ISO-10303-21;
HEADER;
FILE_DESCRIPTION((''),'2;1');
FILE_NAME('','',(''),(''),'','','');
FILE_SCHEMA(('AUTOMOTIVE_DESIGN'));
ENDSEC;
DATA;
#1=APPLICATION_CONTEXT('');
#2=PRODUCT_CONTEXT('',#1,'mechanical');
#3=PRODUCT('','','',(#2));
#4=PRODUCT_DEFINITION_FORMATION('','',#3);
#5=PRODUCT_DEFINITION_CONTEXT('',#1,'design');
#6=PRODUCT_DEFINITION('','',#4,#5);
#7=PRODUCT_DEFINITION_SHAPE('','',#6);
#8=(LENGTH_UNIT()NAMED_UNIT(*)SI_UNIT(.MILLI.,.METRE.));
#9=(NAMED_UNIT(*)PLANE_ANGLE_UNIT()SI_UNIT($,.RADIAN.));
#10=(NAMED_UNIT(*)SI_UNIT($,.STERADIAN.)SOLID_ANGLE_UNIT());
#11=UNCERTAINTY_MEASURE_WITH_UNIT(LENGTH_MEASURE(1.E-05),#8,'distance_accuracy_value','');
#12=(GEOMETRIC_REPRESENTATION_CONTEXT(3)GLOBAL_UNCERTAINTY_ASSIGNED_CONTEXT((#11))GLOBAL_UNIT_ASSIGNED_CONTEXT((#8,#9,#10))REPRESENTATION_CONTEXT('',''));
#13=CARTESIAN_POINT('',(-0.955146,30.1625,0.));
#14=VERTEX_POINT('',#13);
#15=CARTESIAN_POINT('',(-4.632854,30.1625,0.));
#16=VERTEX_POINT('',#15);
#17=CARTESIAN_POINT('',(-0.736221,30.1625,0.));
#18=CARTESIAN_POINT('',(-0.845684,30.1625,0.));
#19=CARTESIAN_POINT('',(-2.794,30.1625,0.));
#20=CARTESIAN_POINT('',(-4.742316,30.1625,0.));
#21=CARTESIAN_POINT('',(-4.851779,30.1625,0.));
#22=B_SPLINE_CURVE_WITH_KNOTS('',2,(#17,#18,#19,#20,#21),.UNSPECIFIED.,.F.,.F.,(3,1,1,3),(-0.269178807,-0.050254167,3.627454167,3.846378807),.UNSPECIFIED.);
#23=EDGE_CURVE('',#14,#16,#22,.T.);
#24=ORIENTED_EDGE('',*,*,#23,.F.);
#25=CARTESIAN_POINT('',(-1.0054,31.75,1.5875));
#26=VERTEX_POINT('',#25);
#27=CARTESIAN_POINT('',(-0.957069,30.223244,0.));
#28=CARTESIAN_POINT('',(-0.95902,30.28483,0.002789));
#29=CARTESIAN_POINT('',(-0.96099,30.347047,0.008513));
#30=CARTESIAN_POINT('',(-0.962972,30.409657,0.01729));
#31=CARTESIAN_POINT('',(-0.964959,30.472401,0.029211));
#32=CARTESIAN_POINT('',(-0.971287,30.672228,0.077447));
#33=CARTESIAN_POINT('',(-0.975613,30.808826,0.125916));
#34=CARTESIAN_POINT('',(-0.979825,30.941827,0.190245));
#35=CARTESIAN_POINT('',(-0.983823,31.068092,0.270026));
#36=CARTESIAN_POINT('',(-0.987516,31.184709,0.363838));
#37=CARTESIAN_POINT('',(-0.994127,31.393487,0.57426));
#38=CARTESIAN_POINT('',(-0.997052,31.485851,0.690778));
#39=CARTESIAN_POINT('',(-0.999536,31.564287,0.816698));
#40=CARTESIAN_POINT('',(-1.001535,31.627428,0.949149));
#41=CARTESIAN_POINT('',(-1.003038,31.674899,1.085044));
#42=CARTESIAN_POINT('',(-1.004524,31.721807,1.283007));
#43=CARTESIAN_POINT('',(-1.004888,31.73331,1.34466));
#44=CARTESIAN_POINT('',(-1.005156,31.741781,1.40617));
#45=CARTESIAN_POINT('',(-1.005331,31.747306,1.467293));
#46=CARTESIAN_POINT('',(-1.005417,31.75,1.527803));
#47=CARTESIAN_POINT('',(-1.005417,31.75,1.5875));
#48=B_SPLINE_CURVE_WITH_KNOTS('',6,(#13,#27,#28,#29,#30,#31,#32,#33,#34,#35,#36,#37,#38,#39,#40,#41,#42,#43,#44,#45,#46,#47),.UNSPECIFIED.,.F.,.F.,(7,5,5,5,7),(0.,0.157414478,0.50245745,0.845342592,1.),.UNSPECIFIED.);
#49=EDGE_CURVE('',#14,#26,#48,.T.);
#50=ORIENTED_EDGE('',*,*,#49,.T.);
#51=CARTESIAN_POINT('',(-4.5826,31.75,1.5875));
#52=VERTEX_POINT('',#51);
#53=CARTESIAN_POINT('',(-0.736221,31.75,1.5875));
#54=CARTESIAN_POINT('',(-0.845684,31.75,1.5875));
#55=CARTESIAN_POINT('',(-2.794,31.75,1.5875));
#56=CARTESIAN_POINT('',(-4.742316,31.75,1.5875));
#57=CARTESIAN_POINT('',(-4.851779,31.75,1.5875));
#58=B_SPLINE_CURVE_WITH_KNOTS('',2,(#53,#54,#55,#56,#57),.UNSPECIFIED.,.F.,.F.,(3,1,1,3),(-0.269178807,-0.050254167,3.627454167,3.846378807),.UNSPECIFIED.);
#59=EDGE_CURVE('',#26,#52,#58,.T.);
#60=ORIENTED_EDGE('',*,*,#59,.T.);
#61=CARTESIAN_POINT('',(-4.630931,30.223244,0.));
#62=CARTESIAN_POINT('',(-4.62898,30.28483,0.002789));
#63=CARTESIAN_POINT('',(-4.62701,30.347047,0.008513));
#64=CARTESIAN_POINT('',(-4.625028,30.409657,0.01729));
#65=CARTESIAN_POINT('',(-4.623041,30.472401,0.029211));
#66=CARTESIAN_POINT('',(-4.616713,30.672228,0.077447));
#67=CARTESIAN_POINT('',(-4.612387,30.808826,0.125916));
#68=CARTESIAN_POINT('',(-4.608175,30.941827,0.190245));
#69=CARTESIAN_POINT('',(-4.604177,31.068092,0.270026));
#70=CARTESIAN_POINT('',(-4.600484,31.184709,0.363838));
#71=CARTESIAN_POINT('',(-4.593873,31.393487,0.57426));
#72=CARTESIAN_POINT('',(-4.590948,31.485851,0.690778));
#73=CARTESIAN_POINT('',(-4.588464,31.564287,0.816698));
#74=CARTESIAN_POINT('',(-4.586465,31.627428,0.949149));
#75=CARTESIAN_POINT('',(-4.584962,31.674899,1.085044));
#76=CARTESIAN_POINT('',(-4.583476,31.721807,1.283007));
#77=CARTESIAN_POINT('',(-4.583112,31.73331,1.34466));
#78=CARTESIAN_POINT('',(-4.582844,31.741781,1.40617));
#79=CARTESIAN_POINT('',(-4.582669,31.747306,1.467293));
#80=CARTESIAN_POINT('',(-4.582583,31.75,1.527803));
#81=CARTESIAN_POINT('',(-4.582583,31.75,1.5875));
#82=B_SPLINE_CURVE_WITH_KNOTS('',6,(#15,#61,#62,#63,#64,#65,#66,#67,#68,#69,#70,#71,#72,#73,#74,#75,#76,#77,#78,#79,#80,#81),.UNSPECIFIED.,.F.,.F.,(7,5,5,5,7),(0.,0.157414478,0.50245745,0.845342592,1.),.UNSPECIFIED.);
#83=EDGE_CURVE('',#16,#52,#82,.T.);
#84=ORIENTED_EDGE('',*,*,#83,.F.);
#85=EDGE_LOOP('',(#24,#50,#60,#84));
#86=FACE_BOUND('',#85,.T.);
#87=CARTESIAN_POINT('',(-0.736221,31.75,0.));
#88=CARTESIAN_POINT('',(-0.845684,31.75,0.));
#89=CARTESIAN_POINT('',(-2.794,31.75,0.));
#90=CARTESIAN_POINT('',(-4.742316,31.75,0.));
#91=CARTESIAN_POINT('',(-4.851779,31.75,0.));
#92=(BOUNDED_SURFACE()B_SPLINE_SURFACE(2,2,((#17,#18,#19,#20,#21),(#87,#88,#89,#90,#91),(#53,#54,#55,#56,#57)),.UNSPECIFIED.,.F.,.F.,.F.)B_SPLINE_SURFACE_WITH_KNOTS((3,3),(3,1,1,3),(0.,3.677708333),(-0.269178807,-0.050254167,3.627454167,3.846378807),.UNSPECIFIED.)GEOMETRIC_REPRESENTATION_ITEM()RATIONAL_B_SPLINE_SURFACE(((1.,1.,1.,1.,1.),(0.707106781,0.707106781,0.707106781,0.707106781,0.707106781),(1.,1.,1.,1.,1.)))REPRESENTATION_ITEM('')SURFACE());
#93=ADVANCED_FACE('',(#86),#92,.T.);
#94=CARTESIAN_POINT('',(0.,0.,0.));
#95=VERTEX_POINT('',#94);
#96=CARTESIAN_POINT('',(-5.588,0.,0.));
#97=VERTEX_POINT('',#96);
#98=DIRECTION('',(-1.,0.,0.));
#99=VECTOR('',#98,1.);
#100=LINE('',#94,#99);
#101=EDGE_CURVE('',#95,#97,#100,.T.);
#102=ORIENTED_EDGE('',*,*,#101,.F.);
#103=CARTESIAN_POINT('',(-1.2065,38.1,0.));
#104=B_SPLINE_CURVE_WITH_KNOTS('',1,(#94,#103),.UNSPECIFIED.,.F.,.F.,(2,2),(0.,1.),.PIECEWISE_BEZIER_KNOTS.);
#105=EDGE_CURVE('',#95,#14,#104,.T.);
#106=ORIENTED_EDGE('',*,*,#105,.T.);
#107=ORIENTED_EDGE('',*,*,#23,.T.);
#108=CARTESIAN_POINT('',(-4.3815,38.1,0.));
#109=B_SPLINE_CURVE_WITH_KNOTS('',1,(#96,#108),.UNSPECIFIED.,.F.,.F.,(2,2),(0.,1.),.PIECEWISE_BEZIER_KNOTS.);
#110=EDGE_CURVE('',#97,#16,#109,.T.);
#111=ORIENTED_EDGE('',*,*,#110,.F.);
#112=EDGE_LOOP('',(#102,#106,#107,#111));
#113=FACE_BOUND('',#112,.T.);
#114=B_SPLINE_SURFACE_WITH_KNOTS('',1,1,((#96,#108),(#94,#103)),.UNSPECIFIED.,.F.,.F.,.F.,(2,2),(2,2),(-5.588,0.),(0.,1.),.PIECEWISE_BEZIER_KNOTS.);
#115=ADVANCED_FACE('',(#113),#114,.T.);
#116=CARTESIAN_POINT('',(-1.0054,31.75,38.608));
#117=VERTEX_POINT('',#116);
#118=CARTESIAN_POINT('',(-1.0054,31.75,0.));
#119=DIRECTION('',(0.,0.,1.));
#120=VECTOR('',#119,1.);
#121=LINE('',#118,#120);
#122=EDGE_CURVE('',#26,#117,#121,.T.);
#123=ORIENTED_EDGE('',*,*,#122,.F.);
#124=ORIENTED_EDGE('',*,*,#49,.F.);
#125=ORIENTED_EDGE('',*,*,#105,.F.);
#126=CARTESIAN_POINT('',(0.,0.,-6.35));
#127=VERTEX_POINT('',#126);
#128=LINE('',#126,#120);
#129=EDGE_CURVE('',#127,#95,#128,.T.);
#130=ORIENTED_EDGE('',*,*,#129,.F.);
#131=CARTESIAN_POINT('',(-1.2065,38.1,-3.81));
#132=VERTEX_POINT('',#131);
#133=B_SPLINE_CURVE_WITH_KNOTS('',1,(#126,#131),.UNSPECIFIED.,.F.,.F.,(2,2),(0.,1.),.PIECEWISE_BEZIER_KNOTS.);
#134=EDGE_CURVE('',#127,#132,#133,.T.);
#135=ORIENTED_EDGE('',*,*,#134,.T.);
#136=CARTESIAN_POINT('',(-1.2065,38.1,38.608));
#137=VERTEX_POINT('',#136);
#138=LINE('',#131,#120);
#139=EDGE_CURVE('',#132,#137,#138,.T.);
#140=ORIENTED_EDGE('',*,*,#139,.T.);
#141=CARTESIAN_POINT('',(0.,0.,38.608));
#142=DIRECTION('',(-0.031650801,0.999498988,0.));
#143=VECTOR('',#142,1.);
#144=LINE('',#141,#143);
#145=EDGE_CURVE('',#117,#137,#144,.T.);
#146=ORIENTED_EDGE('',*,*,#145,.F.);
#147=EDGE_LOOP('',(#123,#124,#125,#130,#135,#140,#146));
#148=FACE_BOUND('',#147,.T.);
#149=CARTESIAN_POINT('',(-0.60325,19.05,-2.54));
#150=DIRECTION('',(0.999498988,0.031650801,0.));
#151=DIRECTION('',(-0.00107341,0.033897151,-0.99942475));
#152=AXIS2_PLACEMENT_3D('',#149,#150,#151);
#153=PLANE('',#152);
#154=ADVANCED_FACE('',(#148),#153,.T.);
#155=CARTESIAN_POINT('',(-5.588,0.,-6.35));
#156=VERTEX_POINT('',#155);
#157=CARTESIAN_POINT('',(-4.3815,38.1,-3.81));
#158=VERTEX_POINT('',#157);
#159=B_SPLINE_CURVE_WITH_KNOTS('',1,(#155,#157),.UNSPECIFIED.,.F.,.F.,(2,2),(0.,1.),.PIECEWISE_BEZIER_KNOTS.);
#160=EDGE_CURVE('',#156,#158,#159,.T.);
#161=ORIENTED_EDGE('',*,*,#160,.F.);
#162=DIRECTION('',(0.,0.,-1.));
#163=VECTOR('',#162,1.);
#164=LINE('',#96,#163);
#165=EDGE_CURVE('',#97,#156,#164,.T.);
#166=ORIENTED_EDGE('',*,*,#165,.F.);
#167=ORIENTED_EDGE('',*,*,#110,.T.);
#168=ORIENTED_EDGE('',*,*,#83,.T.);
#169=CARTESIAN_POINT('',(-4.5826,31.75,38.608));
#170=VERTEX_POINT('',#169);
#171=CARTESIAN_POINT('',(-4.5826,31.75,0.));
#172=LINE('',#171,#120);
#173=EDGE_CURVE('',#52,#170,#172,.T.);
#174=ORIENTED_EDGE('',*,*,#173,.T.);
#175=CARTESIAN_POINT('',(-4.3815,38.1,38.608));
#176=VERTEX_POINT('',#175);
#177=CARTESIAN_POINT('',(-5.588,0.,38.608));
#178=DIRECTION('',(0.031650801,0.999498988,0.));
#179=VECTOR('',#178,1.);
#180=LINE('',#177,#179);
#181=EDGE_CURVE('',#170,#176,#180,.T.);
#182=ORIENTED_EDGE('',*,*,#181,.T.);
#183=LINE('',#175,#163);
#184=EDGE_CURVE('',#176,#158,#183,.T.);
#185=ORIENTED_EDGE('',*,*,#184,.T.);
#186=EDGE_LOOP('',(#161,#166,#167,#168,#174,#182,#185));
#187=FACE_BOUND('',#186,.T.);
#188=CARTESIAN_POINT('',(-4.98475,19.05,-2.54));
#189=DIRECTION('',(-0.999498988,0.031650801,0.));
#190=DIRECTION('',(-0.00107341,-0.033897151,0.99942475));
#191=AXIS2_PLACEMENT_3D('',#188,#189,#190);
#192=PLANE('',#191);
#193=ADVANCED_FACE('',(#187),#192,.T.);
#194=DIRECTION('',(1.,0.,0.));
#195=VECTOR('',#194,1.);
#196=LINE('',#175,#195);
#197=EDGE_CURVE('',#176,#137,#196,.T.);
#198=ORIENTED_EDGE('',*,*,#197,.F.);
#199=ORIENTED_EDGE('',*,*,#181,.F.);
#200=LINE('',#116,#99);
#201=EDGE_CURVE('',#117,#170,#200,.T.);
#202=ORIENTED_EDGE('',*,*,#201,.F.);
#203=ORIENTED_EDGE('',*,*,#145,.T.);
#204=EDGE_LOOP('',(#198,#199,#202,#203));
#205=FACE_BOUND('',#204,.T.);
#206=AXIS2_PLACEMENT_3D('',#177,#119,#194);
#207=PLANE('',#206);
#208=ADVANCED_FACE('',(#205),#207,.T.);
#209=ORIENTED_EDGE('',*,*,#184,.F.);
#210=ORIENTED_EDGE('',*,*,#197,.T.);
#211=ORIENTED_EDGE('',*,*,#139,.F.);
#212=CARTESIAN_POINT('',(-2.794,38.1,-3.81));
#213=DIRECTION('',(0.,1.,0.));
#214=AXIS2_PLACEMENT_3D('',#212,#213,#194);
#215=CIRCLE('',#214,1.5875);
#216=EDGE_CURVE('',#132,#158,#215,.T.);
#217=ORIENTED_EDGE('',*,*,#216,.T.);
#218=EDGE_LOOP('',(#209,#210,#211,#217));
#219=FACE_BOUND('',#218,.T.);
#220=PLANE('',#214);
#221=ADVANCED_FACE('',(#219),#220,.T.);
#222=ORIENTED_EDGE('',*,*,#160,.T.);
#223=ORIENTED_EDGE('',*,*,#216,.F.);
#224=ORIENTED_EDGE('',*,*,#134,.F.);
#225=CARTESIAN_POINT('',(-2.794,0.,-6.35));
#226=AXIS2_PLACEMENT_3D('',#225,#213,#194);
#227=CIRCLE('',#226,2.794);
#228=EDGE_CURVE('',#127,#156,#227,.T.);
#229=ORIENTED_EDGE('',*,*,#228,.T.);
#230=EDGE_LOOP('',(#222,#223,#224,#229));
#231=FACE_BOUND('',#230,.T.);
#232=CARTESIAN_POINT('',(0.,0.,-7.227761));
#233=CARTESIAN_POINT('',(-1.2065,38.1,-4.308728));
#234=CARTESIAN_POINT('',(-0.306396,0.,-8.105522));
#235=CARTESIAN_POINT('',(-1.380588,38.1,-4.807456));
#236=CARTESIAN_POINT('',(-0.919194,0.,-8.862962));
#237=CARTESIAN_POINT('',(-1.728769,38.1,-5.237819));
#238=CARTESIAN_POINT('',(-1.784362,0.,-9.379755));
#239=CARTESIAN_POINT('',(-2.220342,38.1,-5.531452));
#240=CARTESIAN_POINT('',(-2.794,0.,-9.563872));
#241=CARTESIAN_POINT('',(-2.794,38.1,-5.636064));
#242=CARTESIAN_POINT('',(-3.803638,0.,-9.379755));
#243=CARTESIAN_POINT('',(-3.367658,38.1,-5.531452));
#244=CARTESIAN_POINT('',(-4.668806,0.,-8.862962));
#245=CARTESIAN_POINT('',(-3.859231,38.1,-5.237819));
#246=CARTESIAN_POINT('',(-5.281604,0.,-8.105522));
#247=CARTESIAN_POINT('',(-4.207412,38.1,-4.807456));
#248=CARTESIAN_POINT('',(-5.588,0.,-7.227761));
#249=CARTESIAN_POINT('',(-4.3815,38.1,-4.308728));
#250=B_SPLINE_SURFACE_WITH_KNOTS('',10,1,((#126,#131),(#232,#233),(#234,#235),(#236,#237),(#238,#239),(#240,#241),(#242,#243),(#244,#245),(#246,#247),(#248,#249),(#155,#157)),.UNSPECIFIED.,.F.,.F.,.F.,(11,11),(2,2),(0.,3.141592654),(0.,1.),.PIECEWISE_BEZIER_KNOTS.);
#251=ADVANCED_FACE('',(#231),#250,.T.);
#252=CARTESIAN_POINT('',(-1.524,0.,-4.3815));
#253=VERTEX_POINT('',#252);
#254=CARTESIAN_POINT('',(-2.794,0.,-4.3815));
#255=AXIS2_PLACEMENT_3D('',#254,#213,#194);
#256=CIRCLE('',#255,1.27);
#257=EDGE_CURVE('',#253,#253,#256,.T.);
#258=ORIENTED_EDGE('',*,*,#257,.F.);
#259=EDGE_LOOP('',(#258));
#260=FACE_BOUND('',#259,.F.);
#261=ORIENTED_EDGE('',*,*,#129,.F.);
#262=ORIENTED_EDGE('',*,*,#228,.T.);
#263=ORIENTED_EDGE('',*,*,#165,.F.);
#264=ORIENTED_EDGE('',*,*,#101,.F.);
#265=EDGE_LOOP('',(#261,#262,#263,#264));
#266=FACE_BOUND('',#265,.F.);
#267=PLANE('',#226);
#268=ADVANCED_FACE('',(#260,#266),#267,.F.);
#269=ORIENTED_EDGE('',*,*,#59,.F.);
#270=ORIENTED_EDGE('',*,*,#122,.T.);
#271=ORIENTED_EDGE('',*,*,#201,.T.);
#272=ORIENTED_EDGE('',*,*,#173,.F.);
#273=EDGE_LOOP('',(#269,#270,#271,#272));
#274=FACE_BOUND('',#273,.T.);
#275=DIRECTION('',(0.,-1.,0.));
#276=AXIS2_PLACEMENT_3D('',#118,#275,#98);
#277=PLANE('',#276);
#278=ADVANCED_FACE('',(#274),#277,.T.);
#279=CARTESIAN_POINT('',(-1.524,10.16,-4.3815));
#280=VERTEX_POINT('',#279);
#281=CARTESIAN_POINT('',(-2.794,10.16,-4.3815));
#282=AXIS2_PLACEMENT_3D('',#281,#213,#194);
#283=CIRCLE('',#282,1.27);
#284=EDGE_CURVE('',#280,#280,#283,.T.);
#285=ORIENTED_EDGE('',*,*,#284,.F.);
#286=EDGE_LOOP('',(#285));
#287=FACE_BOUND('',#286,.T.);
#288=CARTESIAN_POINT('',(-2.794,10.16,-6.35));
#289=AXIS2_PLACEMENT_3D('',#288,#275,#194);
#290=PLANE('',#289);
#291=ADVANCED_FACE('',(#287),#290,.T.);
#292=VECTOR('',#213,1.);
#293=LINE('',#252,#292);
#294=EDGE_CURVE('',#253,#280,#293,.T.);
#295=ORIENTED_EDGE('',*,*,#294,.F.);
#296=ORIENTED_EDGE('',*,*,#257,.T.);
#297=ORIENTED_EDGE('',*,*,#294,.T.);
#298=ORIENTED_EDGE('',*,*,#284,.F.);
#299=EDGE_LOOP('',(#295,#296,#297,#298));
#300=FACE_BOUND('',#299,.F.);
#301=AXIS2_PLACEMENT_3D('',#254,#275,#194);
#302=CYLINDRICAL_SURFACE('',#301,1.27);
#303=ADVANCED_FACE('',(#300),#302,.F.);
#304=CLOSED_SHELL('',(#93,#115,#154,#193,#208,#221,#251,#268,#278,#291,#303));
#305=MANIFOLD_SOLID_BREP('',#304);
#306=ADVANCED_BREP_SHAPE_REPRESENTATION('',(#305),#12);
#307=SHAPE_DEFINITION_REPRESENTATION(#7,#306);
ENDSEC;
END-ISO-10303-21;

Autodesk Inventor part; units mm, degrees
ref_plane "YZ Plane" through (0, 0, 0) normal (1, 0, 0) x (0, 1, 0)
ref_plane "XY Plane" through (0, 0, 0) normal (0, 0, 1) x (1, 0, 0)
sketch "Sketch6" plane through (0, 0, 0) normal (0, 1, 0) x (-1, 0, 0)
  line L0 (0, 0) -> (5.588, 0)
  line L1 (5.588, 0) -> (5.588, -6.35)
  line L2 (5.588, -6.35) -> (0, -6.35)
  line L3 (0, -6.35) -> (0, 0)
  arc A0 (0, -6.35) -> (5.588, -6.35) centre (2.794, -6.35) ccw
  dimension "d25" = 5.588
  dimension "d26" = 6.35
ref_plane "Work Plane1" through (0, 38.1, 0) normal (0, 1, 0) x (-1, 0, 0)
sketch "Sketch8" plane through (0, 38.1, 0) normal (0, 1, 0) x (-1, 0, 0)
  line L0 (4.3815, 0) -> (1.2065, 0)
  line L1 (1.2065, 0) -> (1.2065, -3.81)
  line L2 (1.2065, -3.81) -> (4.3815, -3.81)
  line L3 (4.3815, -3.81) -> (4.3815, 0)
  arc A0 (1.2065, -3.81) -> (4.3815, -3.81) centre (2.794, -3.81) ccw
  point P0 (0, 0)
  dimension "d27" = 3.175
  dimension "d28" = 3.81
  dimension "d49" = 1.2065
loft "Loft1" add profiles "Sketch6", "Sketch8"
sketch "Sketch9" plane through (-5.588, 0, 0) normal (0, 0, 1) x (1, 0, 0)
  line L0 (0, 0) -> (5.588, 0) projected
  line L1 (5.588, 0) -> (4.3815, 38.1) projected
  line L2 (1.2065, 38.1) -> (4.3815, 38.1) projected
  line L3 (0, 0) -> (1.2065, 38.1) projected
  line L4 (4.3815, 38.1) -> (5.588, 0) projected
  line L5 (4.5826, 31.75) -> (1.0054, 31.75)
  line L6 (0, 0) -> (1.2065, 38.1) projected
  dimension "d34" = 6.35
extrude "Extrusion5" add sketch "Sketch9" along normal blind 38.608 contours L3 L2 L1 L5
fillet "Fillet2" radius 1.5875 1 edges at (-2.794, 31.75, 0)
sketch "Sketch12" plane through (-2.794, 0, -6.35) normal (0, -1, 0) x (1, 0, 0)
  circle A0 centre (0, 1.9685) radius 1.27
  arc A1 (-2.794, 0) -> (2.794, 0) centre (0, 0) ccw projected
  line L0 (0, -2.794) -> (0, 1.9685)
  point P0 (2.794, 6.35)
  dimension "d44" = 2.54
  dimension "d46" = 4.7625
extrude "Extrusion8" cut sketch "Sketch12" against normal blind 10.16
properties part number "RudderStabilizingFinBottom"
